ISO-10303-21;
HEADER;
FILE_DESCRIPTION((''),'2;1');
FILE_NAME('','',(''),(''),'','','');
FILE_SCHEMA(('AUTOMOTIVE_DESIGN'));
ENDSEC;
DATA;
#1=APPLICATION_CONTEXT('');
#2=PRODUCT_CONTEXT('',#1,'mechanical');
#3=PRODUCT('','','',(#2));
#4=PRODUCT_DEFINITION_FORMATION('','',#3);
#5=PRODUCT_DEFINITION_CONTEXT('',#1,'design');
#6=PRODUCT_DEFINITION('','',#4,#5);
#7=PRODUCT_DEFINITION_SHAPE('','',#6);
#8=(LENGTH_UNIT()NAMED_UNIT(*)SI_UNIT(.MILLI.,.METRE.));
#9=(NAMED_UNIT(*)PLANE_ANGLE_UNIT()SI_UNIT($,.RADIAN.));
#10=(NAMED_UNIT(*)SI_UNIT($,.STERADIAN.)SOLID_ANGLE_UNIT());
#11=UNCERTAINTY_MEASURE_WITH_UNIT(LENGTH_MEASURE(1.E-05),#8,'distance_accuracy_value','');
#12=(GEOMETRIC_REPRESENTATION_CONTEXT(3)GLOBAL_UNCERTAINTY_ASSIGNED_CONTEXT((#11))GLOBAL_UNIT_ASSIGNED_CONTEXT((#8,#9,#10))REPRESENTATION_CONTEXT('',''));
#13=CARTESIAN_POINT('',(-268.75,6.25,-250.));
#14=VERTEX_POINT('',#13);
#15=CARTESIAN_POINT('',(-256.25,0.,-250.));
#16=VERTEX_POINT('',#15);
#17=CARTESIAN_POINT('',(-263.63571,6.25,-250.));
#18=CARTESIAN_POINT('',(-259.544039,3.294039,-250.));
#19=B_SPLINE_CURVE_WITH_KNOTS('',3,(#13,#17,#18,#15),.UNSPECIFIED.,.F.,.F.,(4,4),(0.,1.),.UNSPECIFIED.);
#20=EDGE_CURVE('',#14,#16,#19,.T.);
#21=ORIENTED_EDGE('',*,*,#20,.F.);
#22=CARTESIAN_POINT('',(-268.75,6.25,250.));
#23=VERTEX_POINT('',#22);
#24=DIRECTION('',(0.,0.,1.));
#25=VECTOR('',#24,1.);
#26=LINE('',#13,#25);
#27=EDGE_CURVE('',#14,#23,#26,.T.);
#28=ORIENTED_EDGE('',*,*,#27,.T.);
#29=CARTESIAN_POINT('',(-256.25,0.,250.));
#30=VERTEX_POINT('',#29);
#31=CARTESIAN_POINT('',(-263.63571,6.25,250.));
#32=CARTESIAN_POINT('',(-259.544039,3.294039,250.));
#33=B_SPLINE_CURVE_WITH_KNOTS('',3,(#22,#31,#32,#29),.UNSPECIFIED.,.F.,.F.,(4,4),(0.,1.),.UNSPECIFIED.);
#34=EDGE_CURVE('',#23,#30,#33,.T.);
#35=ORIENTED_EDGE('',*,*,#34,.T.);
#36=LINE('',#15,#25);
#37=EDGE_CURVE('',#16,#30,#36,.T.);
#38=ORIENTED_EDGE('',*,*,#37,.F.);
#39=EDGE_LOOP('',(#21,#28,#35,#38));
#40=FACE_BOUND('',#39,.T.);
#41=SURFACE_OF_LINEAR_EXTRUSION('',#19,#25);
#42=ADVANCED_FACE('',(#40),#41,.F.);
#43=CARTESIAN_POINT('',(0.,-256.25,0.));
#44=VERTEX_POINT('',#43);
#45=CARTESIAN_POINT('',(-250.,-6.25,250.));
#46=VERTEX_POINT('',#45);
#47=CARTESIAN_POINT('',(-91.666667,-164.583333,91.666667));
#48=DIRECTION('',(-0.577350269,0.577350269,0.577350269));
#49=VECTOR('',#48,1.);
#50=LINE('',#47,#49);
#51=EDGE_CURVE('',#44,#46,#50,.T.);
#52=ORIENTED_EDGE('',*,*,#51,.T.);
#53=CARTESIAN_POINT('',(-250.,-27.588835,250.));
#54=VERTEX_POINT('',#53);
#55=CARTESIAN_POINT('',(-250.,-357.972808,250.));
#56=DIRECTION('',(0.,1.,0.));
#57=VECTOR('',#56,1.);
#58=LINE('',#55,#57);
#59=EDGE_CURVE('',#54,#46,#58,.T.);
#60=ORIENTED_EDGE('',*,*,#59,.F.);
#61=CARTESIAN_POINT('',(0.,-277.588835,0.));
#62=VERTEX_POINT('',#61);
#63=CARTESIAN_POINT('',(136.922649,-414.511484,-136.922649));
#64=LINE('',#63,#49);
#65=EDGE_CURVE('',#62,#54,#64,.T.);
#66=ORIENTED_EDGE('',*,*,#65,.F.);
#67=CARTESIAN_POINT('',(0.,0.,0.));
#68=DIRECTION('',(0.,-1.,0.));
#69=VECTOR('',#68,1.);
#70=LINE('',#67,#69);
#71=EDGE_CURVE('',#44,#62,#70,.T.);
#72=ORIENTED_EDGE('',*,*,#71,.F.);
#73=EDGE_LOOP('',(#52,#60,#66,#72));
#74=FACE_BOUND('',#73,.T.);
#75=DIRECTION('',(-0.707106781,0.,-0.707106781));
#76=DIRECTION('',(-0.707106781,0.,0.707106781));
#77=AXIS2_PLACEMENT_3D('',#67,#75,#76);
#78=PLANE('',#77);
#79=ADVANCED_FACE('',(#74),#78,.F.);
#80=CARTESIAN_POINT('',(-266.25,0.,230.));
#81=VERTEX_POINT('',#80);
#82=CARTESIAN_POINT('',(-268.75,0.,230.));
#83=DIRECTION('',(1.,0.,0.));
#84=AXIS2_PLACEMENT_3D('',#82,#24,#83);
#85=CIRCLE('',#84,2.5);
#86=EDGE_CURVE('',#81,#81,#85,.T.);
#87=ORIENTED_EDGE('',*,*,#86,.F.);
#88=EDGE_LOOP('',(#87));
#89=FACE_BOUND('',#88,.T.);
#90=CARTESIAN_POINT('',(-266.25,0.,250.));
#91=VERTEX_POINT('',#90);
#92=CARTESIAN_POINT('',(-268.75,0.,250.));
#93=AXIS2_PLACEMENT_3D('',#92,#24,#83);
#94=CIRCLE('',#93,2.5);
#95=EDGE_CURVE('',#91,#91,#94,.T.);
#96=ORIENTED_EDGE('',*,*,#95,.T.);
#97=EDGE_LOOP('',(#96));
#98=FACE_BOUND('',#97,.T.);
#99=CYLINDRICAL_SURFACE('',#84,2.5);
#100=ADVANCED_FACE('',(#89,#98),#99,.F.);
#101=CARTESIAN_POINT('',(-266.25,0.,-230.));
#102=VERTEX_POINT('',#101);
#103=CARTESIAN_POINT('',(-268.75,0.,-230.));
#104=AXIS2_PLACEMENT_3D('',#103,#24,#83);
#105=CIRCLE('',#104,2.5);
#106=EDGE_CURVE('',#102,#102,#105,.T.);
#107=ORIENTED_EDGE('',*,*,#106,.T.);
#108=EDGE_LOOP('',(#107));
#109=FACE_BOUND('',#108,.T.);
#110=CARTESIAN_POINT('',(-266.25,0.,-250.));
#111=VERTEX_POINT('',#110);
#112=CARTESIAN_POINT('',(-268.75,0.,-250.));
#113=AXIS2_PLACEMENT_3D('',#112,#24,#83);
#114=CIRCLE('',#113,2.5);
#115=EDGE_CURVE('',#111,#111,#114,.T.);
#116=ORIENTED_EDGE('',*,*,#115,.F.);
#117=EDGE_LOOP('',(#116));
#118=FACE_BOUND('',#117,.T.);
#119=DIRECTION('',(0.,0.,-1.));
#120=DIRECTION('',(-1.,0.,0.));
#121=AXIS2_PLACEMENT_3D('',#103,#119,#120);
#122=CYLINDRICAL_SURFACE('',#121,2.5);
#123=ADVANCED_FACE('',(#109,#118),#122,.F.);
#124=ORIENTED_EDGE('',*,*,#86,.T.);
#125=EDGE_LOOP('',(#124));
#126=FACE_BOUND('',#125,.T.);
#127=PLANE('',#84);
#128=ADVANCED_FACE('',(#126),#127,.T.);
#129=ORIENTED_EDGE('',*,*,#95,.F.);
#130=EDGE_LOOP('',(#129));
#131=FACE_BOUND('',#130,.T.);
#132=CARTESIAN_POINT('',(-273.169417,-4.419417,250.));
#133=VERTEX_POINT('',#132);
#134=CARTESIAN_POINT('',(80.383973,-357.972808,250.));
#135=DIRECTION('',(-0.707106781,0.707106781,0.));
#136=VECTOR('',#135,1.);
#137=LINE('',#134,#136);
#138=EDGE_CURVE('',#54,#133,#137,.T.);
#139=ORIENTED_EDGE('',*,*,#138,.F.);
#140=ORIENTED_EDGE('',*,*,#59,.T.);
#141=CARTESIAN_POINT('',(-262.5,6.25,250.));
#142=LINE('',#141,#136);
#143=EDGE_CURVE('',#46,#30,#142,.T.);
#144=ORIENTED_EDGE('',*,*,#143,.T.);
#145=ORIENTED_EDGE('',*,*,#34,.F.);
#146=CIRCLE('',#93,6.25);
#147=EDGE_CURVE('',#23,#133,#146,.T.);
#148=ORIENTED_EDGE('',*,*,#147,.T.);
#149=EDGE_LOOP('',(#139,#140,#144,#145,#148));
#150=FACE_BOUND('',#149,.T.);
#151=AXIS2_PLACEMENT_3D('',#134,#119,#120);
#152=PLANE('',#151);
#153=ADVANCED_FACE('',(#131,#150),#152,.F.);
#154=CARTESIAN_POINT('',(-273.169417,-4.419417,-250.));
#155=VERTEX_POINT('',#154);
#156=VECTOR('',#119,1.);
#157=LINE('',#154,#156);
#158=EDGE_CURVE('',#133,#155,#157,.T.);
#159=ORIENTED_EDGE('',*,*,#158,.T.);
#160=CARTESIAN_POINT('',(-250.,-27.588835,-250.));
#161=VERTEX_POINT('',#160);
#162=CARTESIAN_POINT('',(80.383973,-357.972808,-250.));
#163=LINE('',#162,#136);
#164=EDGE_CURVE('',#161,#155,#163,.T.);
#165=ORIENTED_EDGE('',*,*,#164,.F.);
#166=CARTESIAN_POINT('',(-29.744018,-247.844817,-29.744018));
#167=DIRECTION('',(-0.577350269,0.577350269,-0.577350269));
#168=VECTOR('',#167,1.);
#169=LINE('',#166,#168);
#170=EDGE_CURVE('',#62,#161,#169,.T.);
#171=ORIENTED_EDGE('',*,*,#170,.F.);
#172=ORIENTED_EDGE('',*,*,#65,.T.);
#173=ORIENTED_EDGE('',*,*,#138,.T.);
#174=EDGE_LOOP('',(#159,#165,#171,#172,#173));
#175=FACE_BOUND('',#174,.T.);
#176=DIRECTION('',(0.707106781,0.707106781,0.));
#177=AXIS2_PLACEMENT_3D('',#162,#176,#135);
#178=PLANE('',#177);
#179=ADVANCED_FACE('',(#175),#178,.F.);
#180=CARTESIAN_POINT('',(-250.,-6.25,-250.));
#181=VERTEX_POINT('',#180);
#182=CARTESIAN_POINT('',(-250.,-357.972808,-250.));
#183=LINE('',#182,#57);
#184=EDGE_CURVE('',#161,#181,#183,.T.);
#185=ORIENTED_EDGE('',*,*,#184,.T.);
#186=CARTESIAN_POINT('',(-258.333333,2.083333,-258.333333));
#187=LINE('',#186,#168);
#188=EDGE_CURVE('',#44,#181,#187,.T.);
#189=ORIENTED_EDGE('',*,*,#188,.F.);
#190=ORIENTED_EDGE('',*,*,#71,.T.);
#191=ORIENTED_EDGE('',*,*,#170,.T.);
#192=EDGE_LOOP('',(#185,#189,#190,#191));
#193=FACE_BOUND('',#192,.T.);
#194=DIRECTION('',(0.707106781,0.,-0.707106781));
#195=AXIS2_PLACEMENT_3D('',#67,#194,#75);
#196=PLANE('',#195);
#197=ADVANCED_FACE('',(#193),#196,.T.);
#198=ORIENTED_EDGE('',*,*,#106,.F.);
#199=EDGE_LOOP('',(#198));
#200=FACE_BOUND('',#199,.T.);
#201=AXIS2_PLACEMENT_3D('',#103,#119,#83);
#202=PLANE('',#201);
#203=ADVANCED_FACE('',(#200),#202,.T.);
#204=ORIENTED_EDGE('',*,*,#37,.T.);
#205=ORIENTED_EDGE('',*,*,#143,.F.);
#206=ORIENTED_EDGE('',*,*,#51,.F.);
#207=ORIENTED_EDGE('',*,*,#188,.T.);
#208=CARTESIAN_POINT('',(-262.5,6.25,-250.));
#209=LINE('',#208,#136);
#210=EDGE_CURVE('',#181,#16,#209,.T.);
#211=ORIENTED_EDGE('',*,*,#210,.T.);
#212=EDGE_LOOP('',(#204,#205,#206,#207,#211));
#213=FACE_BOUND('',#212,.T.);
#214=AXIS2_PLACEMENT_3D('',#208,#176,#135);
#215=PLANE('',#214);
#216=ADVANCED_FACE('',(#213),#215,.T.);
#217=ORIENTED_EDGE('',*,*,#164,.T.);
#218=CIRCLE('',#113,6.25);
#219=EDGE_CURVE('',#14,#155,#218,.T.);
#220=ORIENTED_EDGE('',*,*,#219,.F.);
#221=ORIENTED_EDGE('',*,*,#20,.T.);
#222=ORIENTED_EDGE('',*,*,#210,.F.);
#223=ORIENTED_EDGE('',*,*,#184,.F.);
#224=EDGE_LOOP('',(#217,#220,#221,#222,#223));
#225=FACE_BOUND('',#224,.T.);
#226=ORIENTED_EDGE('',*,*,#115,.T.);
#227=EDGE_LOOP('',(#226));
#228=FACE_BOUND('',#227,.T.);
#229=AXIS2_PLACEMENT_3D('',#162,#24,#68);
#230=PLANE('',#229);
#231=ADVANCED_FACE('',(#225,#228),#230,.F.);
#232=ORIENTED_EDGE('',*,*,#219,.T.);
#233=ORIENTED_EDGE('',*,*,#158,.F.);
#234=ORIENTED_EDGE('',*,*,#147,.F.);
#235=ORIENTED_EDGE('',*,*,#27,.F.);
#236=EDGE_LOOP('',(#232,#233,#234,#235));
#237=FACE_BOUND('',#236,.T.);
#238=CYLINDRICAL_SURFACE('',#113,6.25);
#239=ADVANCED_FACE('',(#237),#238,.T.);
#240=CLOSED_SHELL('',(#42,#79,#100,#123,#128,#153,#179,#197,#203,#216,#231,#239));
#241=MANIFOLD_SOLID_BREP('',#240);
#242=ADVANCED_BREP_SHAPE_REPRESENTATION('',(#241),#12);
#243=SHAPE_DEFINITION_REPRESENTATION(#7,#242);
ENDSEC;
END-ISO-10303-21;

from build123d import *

# Parameters (mm, degrees)
SKETCH2_W               = 500
SKETCH2_H               = 12.5
BOSS_EXTRUDE1_DEPTH     = 500
SKETCH6_R               = 6.25
BOSS_EXTRUDE3_DEPTH     = 500
BOSS_EXTRUDE4_DEPTH     = 500
CUT_EXTRUDE2_DEPTH      = 674.624176563
CUT_EXTRUDE2_DEPTH_BACK = 674.624176563
SKETCH9_R               = 2.5
CUT_EXTRUDE3_DEPTH      = 20
INTERSECT3_START        = -357.972808076
INTERSECT3_DEPTH        = 351.722808076


# Read off the part's stored shape, not the designer's step: Intersect3
with BuildPart() as part:
    # Sketch2 → Boss-Extrude1 (new body)
    with BuildSketch(Plane(origin=(-134.375, 134.375, 0), x_dir=(0, 0, 1), z_dir=(0.7071067811865464, -0.7071067811865488, 0))):
        with Locations((0, 190.034947444)):
            Rectangle(SKETCH2_W, SKETCH2_H)
    extrude(amount=BOSS_EXTRUDE1_DEPTH)

    # Sketch6 → Boss-Extrude3 (add)
    with BuildSketch(Plane.XY.offset(250)):
        with Locations((-268.75, 0)):
            Circle(SKETCH6_R)
    extrude(amount=-BOSS_EXTRUDE3_DEPTH)

    # Sketch7 → Boss-Extrude4 (add)
    with BuildSketch(Plane.XY.offset(250)):
        Polygon((-268.75, 6.25), (-262.5, 6.25), (91.053390593, -347.303390593), (89.222807976, -349.133973211), align=None)
    extrude(amount=-BOSS_EXTRUDE4_DEPTH)

    # Sketch8 → Cut-Extrude2 (cut, two sides: drawn at the far end of the back side and taken through both)
    with BuildSketch(Plane.XY.offset(250).offset(-CUT_EXTRUDE2_DEPTH_BACK)):
        with BuildLine():
            Line((-268.75, 6.25), (-263.442130557, 9.619585215))
            Line((-263.442130557, 9.619585215), (-256.25, 0))
            add(Edge.make_bspline(
                [(-268.75, 6.25), (-263.635709853, 6.25), (-259.544039229, 3.294039229), (-256.25, 0)],
                knots=[0, 0, 0, 0, 1, 1, 1, 1], degree=3))
        make_face()
    extrude(amount=CUT_EXTRUDE2_DEPTH + CUT_EXTRUDE2_DEPTH_BACK, mode=Mode.SUBTRACT)

    # Sketch9 → Cut-Extrude3 (cut)
    with BuildSketch(Plane.XY.offset(250)):
        with Locations((-268.75, 0)):
            Circle(SKETCH9_R)
    cut_extrude3 = extrude(amount=-CUT_EXTRUDE3_DEPTH, mode=Mode.SUBTRACT)

    # Mirror2: Cut-Extrude3 across plane
    add(cut_extrude3.mirror(Plane.XY), mode=Mode.SUBTRACT)

    # Intersect3 outline → Intersect3 (cut)
    with BuildSketch(Plane(origin=(0, 0, 0), x_dir=(1, 0, 0), z_dir=(0, 1, 0)).offset(INTERSECT3_START)):
        Polygon((-250, 250), (0, 0), (-250, -250), (93, -250), (93, 250), align=None)
    extrude(amount=INTERSECT3_DEPTH, mode=Mode.SUBTRACT)


solid = part.part
